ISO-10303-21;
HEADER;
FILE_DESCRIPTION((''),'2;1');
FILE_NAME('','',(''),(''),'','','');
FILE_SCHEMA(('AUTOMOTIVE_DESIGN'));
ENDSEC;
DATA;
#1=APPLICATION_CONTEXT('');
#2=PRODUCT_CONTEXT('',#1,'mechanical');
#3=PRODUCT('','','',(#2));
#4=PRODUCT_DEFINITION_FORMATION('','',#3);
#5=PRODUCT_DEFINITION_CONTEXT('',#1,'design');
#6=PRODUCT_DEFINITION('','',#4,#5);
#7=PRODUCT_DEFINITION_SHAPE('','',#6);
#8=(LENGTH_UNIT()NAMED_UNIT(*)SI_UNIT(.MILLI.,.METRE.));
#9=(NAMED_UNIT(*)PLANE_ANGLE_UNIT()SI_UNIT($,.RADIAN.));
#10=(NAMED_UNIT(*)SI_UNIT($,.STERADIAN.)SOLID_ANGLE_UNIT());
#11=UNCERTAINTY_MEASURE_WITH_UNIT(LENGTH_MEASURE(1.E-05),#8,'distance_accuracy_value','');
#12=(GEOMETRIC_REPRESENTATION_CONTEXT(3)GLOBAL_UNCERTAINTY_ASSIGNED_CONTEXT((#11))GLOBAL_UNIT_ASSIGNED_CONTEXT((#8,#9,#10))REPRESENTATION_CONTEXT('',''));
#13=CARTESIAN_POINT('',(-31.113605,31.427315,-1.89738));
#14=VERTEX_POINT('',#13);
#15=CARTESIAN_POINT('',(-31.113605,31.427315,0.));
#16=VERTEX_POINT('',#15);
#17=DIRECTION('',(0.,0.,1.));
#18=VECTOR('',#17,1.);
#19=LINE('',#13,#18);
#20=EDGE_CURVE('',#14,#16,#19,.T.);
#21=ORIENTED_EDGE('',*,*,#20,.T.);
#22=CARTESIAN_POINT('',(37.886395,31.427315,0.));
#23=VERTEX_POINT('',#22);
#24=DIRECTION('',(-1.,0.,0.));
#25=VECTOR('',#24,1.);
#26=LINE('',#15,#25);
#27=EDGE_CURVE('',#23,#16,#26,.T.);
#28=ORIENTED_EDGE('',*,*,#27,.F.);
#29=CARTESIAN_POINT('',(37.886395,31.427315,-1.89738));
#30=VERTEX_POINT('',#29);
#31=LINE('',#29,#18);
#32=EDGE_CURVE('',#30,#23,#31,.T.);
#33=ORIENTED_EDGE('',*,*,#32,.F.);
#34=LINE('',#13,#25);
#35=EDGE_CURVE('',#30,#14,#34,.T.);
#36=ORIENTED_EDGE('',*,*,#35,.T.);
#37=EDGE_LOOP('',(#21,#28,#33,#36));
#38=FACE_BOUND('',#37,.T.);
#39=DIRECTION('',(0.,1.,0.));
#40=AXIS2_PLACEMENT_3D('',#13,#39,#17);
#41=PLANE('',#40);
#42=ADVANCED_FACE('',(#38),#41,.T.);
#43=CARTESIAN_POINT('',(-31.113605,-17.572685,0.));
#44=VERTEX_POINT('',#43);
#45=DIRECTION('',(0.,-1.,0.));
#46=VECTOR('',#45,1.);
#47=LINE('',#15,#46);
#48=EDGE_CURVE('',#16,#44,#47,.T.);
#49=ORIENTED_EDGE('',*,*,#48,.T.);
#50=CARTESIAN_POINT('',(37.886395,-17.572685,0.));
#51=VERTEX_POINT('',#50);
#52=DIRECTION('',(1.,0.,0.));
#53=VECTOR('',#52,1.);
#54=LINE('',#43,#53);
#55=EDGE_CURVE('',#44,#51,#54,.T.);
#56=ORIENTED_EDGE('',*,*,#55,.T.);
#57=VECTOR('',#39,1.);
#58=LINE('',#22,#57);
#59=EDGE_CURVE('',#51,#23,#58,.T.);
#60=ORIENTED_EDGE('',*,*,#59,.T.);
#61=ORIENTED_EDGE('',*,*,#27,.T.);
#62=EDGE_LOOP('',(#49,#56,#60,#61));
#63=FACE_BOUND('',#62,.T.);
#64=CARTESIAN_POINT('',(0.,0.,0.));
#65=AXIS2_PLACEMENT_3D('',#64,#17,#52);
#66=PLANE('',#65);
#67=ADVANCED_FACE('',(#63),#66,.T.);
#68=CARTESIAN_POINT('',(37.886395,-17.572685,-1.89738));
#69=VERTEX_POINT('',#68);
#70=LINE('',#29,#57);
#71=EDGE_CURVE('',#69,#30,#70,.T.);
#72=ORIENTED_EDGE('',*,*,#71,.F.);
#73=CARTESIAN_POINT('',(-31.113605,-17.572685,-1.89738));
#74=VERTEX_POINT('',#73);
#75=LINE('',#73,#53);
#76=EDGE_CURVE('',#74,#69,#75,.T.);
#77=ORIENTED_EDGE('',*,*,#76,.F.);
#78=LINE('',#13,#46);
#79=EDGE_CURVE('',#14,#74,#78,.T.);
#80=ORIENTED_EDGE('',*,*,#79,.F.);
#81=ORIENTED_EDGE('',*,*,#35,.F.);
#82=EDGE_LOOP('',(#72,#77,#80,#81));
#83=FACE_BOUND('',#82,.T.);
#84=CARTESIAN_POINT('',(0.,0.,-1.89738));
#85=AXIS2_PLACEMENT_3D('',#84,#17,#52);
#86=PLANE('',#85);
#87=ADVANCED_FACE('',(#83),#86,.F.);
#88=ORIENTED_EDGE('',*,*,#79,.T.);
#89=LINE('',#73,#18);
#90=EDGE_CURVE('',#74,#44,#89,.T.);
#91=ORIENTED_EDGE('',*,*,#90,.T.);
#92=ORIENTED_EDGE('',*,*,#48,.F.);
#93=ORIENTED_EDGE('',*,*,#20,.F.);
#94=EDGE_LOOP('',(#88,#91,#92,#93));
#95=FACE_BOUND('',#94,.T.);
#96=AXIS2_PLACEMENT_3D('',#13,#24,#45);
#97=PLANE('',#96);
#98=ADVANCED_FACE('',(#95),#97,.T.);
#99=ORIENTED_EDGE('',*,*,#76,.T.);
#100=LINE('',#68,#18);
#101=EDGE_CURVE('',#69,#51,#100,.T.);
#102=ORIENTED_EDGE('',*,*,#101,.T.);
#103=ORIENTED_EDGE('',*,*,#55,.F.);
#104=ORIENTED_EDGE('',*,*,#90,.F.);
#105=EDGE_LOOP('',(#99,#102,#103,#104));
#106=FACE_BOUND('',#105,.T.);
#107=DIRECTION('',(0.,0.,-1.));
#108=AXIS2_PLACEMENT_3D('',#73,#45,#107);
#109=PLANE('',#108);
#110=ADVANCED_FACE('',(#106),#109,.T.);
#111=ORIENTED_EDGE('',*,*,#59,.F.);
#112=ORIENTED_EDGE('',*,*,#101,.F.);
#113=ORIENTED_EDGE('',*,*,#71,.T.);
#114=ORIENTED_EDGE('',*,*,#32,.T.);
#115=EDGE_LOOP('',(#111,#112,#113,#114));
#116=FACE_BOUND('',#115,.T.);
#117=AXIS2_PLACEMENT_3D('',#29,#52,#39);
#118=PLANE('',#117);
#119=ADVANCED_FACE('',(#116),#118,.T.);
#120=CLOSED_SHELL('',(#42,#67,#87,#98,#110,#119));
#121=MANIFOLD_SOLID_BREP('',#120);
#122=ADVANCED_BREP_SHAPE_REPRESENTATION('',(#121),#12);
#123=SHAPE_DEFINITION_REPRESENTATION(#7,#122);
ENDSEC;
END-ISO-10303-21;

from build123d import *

# Parameters (mm, degrees)
SKETCH1_W          = 69
SKETCH1_H          = 49
BASE_FLANGE1_DEPTH = 1.89738


# Sheet-metal steps are written as plain solids
with BuildPart() as part:
    # Sketch1 → Base-Flange1 (new body)
    with BuildSketch(Plane.XY):
        with Locations((3.386394684, 6.927314943)):
            Rectangle(SKETCH1_W, SKETCH1_H)
    extrude(amount=-BASE_FLANGE1_DEPTH)


solid = part.part
